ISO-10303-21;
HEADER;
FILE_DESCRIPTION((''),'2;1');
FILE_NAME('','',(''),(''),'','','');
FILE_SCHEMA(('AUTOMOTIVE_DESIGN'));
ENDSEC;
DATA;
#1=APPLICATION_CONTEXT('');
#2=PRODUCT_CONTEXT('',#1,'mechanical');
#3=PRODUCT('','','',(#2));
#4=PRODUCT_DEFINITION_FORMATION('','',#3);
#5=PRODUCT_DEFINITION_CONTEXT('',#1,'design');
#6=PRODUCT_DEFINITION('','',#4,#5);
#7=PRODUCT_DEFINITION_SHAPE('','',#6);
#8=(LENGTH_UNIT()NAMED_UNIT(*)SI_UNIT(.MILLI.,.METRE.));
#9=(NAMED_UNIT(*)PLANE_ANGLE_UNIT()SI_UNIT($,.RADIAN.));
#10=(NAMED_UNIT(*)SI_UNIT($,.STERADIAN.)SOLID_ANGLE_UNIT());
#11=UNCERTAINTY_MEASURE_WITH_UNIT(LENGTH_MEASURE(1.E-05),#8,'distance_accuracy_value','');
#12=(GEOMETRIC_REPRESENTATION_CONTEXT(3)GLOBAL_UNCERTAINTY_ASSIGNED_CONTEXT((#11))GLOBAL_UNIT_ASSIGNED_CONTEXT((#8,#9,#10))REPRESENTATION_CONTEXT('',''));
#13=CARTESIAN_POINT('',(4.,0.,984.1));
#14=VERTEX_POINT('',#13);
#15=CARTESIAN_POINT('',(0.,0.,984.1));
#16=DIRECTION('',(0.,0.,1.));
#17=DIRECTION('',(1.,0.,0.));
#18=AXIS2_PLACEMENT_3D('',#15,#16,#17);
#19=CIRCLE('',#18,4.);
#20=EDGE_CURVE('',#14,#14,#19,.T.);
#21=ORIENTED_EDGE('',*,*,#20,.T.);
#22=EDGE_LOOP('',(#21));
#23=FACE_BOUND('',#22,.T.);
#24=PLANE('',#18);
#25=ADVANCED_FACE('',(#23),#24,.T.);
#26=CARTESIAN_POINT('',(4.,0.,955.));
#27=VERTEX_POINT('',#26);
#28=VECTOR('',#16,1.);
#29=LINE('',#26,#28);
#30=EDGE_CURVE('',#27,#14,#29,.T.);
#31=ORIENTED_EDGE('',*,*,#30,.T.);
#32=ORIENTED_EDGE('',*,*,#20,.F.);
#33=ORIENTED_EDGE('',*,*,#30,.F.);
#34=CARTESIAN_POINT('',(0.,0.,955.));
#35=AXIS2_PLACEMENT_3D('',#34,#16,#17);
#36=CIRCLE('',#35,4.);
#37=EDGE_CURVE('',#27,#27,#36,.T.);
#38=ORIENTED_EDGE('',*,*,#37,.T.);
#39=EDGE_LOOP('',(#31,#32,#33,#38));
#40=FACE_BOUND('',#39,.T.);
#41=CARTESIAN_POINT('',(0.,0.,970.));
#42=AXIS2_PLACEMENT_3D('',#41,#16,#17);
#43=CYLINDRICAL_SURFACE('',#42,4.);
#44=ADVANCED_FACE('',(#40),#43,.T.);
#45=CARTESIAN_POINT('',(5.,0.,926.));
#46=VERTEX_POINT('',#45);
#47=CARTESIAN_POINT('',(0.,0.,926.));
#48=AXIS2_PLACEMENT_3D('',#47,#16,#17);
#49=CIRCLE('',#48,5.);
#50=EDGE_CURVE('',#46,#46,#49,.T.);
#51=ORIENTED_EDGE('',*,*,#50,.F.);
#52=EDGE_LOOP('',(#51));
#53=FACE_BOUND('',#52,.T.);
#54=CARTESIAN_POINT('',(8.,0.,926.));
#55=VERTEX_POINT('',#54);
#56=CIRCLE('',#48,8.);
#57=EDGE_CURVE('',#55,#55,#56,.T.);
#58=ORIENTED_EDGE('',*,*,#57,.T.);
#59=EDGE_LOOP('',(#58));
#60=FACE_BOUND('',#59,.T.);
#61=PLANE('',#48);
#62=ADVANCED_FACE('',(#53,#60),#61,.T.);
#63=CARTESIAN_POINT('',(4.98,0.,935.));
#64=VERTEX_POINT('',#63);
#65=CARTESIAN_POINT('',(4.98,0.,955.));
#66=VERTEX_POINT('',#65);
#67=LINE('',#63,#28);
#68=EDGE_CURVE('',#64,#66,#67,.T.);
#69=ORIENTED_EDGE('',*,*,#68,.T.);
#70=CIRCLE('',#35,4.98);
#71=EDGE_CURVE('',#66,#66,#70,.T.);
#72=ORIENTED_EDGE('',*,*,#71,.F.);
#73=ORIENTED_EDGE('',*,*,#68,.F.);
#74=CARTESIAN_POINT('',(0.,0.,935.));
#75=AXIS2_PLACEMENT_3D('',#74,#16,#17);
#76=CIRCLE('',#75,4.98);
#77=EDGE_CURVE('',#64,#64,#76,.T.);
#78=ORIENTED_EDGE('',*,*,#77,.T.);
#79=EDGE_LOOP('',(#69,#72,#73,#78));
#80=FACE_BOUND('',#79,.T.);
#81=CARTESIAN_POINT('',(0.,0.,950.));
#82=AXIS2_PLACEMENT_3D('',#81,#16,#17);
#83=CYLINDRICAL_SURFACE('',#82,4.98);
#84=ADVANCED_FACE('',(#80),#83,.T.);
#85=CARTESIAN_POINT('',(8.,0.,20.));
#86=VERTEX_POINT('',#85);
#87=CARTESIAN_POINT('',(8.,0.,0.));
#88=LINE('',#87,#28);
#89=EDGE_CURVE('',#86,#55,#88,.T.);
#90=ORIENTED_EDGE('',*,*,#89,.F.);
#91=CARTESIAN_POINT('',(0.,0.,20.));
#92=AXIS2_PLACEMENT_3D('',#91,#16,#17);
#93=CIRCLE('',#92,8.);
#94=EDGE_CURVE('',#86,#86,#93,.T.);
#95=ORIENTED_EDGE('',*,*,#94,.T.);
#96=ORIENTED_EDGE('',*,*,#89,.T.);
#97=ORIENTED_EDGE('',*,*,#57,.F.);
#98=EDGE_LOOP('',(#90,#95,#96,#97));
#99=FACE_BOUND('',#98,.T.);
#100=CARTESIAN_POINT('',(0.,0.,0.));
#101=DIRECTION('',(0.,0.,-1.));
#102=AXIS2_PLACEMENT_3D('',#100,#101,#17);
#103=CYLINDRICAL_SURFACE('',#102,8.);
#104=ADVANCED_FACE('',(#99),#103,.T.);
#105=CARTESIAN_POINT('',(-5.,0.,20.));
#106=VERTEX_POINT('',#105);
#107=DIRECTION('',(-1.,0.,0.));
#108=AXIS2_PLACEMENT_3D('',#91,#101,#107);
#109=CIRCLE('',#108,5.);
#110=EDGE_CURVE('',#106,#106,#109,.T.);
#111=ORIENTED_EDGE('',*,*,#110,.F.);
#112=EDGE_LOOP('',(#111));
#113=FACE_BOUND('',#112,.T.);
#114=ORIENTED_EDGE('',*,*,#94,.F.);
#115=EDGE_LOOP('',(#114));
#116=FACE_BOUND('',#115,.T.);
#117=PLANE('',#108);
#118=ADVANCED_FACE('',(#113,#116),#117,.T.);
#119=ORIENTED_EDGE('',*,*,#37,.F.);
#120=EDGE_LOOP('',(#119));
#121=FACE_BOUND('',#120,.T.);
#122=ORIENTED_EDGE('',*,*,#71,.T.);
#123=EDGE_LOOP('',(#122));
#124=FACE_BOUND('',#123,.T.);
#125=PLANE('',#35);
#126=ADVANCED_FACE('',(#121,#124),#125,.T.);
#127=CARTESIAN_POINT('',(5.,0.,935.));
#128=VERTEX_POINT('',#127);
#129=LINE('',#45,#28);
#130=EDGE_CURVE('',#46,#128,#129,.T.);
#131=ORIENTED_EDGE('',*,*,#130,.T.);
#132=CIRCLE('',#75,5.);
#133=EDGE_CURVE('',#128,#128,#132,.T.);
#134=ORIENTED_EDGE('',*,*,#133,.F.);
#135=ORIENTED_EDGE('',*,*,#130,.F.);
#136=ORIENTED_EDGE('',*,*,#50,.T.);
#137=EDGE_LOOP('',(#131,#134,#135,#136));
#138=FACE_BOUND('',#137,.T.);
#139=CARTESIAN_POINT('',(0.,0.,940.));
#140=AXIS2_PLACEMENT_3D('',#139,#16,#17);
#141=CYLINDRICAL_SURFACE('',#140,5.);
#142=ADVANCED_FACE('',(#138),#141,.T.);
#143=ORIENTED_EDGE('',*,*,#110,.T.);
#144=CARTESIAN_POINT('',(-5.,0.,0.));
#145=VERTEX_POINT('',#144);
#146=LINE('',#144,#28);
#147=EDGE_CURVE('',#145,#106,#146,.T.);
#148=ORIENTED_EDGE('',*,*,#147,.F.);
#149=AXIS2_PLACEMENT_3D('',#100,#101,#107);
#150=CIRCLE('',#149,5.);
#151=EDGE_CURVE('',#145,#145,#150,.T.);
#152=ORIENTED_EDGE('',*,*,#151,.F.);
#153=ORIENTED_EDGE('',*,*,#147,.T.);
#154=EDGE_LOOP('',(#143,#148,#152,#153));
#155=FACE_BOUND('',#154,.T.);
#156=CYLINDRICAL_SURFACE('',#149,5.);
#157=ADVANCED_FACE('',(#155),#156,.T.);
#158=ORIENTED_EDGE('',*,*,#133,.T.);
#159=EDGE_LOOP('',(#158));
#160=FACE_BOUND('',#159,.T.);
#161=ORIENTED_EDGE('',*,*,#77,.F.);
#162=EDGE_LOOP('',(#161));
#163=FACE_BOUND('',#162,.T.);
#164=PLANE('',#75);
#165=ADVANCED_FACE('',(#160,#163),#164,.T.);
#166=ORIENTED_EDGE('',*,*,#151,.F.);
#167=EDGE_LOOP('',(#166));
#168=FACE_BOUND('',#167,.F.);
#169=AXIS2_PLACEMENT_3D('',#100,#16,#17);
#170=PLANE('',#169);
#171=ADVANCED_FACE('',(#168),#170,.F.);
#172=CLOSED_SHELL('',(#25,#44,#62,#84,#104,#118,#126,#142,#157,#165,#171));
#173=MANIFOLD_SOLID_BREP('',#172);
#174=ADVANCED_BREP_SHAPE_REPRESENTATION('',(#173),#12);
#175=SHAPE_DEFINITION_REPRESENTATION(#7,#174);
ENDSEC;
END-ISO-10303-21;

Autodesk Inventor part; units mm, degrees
ref_plane "YZ Plane" through (0, 0, 0) normal (1, 0, 0) x (0, 1, 0)
ref_plane "XZ Plane" through (0, 0, 0) normal (0, 1, 0) x (-1, 0, 0)
ref_plane "XY Plane" through (0, 0, 0) normal (0, 0, 1) x (1, 0, 0)
sketch "Szkic1" plane through (0, 0, 0) normal (0, 0, 1) x (1, 0, 0)
  circle A0 centre (0, 0) radius 8
  dimension "d0" = 16
extrude "Wyciągnięcie proste2" add sketch "Szkic1" along normal blind 1000
sketch "Szkic2" plane through (0, 0, 1000) normal (0, 0, 1) x (1, 0, 0)
  circle A0 centre (0, 0) radius 4
  circle A1 centre (0, 0) radius 8 projected
  dimension "d7" = 8
extrude "Wyciągnięcie proste3" cut sketch "Szkic2" against normal blind 30
sketch "Szkic3" plane through (0, 0, 970) normal (0, 0, 1) x (1, 0, 0)
  circle A0 centre (0, 0) radius 8 projected
  circle A1 centre (0, 0) radius 5
  dimension "d10" = 10
extrude "Wyciągnięcie proste4" cut sketch "Szkic3" against normal blind 30
sketch "Szkic4" plane through (0, 0, 970) normal (0, 0, 1) x (1, 0, 0)
  circle A0 centre (0, 0) radius 5 projected
  circle A1 centre (0, 0) radius 4.98
  dimension "d13" = 9.96
extrude "Wyciągnięcie proste5" cut sketch "Szkic4" against normal blind 20
thread "Gwint2" size "M10x1.5" class "6g" standard "ANSI Metric M Profile" full length
sketch "Szkic5" plane through (0, 0, 0) normal (0, 0, -1) x (-1, 0, 0)
  circle A0 centre (0, 0) radius 5
  circle A1 centre (0, 0) radius 8 projected
  dimension "d18" = 10
extrude "Wyciągnięcie proste6" cut sketch "Szkic5" against normal blind 20
thread "Gwint3" size "TR16x4" class "7e" standard "ISO Metric Trapezoidal Threads" full length
sketch "Szkic6" plane through (0, 0, 940) normal (0, 0, 1) x (1, 0, 0)
  circle A0 centre (0, 0) radius 5 projected
  circle A1 centre (0, 0) radius 8 projected
extrude "Wyciągnięcie proste7" cut sketch "Szkic6" against normal blind 14
sketch "Szkic7" plane through (0, 0, 950) normal (0, 0, 1) x (1, 0, 0)
  circle A0 centre (0, 0) radius 4.98 projected
  circle A1 centre (0, 0) radius 5 projected
extrude "Wyciągnięcie proste8" cut sketch "Szkic7" against normal blind 15
sketch "Szkic8" plane through (0, 0, 970) normal (0, 0, 1) x (1, 0, 0)
  circle A0 centre (0, 0) radius 4.98 projected
  circle A1 centre (0, 0) radius 4 projected
extrude "Wyciągnięcie proste9" cut sketch "Szkic8" against normal blind 15
sketch "Szkic9" plane through (0, 0, 1000) normal (0, 0, 1) x (1, 0, 0)
  circle A0 centre (0, 0) radius 4 projected
extrude "Wyciągnięcie proste10" cut sketch "Szkic9" against normal blind 15.9
properties part number "Śruba trapezowa fi10mm"
